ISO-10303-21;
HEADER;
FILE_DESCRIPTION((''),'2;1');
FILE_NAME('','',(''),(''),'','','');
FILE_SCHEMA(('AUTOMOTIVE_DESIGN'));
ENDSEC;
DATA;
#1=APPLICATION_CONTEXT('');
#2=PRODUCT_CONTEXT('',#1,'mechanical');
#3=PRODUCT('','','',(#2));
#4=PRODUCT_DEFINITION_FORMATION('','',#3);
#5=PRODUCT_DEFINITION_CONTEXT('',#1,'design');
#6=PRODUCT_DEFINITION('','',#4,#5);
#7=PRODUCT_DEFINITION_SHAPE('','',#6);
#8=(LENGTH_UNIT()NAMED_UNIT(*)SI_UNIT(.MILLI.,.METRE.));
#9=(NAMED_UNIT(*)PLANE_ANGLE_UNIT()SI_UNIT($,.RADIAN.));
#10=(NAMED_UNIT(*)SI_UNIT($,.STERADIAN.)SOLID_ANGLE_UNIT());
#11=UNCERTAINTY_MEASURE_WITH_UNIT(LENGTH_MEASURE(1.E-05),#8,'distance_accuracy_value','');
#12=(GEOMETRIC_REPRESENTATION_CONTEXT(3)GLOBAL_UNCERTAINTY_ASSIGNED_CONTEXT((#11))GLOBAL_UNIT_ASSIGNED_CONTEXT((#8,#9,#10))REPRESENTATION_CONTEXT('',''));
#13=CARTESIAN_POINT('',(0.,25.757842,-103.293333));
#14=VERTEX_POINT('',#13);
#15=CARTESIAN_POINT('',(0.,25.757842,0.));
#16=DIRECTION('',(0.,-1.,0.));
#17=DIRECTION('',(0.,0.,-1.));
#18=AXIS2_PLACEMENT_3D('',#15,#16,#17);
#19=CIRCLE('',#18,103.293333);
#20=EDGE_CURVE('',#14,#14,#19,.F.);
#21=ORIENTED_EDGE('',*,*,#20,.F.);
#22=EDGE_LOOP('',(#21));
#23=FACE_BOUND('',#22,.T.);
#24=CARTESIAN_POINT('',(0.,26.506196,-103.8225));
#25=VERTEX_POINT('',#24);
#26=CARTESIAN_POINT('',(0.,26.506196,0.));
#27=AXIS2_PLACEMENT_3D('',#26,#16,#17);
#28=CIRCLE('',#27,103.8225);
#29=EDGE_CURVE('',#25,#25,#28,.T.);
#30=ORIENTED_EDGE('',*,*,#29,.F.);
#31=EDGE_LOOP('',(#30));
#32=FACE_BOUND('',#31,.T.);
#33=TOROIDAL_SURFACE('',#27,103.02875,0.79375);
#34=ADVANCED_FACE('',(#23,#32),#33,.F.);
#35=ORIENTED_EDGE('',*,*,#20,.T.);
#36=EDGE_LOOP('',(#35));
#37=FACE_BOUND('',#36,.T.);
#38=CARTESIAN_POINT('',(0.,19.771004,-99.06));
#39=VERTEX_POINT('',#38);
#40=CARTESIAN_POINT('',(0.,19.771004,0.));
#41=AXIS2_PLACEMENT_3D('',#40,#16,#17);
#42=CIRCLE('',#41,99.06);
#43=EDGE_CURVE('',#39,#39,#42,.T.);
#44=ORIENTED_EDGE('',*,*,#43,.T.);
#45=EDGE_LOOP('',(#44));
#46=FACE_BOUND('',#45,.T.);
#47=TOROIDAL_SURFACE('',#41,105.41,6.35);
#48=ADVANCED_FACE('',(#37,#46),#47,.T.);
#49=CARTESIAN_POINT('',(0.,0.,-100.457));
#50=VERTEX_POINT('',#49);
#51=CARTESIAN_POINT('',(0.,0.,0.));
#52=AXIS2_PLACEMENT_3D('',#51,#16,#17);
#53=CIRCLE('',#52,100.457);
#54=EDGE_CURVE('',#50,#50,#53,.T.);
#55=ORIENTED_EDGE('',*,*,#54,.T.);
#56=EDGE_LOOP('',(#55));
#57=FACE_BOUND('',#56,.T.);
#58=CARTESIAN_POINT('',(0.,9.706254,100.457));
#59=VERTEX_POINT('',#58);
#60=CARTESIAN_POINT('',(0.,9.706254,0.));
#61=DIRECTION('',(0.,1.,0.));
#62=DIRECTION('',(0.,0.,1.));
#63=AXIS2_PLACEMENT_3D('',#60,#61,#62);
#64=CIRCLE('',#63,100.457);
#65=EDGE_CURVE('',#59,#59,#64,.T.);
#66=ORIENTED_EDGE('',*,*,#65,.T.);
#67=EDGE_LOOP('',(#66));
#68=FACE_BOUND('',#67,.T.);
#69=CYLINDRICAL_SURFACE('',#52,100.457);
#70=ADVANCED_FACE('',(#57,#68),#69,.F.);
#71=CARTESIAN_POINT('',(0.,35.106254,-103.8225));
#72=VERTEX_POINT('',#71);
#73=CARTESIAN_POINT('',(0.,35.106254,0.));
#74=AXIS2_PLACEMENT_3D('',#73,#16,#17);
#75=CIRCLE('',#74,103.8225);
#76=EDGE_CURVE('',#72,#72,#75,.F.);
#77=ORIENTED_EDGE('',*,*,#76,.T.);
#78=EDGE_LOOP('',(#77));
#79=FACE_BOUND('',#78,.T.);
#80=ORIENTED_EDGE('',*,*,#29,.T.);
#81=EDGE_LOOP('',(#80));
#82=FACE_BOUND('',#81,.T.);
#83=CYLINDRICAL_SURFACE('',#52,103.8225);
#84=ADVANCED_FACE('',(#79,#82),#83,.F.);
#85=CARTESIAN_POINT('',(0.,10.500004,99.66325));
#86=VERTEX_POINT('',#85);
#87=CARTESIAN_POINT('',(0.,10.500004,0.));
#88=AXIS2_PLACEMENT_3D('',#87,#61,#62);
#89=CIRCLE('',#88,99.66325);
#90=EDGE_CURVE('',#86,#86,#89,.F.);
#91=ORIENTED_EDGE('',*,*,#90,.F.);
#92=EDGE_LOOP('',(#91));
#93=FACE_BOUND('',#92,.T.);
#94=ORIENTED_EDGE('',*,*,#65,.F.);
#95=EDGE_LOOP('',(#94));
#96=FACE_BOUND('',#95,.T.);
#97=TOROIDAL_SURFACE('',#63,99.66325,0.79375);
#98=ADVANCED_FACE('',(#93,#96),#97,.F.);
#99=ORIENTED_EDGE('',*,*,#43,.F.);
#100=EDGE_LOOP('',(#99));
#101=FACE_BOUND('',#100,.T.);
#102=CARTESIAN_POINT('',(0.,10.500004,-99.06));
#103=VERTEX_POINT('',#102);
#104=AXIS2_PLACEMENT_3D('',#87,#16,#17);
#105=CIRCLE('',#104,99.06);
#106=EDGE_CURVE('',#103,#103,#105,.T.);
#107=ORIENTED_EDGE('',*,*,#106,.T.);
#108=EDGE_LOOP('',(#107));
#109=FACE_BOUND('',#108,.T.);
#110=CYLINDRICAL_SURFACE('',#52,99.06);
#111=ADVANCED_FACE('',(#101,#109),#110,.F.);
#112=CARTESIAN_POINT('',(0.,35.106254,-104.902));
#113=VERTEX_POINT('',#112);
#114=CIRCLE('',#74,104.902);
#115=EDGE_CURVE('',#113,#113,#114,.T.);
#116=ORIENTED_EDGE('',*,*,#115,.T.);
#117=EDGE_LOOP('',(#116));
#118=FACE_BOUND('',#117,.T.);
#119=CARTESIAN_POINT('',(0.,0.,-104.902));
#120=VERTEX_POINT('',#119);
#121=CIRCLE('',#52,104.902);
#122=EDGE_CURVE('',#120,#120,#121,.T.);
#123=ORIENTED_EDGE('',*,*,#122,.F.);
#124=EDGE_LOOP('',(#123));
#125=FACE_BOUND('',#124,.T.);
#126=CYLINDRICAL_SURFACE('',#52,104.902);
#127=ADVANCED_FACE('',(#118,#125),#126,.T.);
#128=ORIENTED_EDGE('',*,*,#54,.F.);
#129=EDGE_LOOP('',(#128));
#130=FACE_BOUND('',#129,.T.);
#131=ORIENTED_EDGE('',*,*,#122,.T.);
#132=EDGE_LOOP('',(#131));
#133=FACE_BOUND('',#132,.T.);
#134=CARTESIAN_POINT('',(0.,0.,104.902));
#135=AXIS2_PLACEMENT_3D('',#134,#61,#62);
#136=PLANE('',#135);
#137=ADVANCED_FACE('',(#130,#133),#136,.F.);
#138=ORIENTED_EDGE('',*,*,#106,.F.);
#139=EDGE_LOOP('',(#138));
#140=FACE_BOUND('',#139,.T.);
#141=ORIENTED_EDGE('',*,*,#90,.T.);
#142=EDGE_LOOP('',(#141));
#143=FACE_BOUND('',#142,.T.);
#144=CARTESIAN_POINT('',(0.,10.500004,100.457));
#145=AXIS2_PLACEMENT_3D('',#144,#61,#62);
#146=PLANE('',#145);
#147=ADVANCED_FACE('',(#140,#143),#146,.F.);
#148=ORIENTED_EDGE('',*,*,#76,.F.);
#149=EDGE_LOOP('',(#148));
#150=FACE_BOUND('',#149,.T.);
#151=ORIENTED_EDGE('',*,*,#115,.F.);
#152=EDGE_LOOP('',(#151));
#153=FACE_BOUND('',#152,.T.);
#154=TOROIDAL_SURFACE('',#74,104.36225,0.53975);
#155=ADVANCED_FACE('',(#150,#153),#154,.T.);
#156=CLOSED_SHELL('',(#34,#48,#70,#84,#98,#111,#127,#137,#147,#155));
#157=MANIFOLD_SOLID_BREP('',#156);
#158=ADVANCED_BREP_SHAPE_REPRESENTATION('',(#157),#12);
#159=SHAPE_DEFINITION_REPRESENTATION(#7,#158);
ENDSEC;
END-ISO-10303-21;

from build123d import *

# Parameters (mm, degrees)
FILLET1_R = 0.79375
FILLET2_R = 0.53975


with BuildPart() as part:
    # Sketch1 → Revolve1 (revolve)
    with BuildSketch(Plane(origin=(0, 0, 0), x_dir=(0, 0, -1), z_dir=(1, 0, 0)), mode=Mode.PRIVATE) as revolve1_sk:
        with BuildLine():
            Line((-104.902, 0), (-100.457, 0))
            Line((-100.457, 0), (-100.457, 10.5000044))
            Line((-100.457, 10.5000044), (-99.06, 10.5000044))
            Line((-99.06, 10.5000044), (-99.06, 19.7710044))
            ThreePointArc((-99.06, 19.7710044), (-100.389884214, 23.659569367), (-103.8225, 25.919365462))
            Line((-103.8225, 25.919365462), (-103.8225, 35.6460044))
            Line((-103.8225, 35.6460044), (-104.902, 35.6460044))
            Line((-104.902, 35.6460044), (-104.902, 0))
        make_face()
    revolve(revolve1_sk.sketch.rotate(Axis((0, 0, 0), (0, 1, 0)), 180), axis=Axis((0, 0, 0), (0, 1, 0)))

    # Fillet1
    fillet1_edges = [part.edges().sort_by_distance(p)[0] for p in [
        (0, 25.919365462, 103.8225),
        (0, 10.5000044, 100.457),
    ]]
    fillet(fillet1_edges, radius=FILLET1_R)

    # Fillet2
    fillet2_edges = [part.edges().sort_by_distance(p)[0] for p in [
        (0, 35.6460044, 104.902),
        (0, 35.6460044, 103.8225),
    ]]
    fillet(fillet2_edges, radius=FILLET2_R - 0.0001)  # a hair under: the kernel refuses the full size


solid = part.part
